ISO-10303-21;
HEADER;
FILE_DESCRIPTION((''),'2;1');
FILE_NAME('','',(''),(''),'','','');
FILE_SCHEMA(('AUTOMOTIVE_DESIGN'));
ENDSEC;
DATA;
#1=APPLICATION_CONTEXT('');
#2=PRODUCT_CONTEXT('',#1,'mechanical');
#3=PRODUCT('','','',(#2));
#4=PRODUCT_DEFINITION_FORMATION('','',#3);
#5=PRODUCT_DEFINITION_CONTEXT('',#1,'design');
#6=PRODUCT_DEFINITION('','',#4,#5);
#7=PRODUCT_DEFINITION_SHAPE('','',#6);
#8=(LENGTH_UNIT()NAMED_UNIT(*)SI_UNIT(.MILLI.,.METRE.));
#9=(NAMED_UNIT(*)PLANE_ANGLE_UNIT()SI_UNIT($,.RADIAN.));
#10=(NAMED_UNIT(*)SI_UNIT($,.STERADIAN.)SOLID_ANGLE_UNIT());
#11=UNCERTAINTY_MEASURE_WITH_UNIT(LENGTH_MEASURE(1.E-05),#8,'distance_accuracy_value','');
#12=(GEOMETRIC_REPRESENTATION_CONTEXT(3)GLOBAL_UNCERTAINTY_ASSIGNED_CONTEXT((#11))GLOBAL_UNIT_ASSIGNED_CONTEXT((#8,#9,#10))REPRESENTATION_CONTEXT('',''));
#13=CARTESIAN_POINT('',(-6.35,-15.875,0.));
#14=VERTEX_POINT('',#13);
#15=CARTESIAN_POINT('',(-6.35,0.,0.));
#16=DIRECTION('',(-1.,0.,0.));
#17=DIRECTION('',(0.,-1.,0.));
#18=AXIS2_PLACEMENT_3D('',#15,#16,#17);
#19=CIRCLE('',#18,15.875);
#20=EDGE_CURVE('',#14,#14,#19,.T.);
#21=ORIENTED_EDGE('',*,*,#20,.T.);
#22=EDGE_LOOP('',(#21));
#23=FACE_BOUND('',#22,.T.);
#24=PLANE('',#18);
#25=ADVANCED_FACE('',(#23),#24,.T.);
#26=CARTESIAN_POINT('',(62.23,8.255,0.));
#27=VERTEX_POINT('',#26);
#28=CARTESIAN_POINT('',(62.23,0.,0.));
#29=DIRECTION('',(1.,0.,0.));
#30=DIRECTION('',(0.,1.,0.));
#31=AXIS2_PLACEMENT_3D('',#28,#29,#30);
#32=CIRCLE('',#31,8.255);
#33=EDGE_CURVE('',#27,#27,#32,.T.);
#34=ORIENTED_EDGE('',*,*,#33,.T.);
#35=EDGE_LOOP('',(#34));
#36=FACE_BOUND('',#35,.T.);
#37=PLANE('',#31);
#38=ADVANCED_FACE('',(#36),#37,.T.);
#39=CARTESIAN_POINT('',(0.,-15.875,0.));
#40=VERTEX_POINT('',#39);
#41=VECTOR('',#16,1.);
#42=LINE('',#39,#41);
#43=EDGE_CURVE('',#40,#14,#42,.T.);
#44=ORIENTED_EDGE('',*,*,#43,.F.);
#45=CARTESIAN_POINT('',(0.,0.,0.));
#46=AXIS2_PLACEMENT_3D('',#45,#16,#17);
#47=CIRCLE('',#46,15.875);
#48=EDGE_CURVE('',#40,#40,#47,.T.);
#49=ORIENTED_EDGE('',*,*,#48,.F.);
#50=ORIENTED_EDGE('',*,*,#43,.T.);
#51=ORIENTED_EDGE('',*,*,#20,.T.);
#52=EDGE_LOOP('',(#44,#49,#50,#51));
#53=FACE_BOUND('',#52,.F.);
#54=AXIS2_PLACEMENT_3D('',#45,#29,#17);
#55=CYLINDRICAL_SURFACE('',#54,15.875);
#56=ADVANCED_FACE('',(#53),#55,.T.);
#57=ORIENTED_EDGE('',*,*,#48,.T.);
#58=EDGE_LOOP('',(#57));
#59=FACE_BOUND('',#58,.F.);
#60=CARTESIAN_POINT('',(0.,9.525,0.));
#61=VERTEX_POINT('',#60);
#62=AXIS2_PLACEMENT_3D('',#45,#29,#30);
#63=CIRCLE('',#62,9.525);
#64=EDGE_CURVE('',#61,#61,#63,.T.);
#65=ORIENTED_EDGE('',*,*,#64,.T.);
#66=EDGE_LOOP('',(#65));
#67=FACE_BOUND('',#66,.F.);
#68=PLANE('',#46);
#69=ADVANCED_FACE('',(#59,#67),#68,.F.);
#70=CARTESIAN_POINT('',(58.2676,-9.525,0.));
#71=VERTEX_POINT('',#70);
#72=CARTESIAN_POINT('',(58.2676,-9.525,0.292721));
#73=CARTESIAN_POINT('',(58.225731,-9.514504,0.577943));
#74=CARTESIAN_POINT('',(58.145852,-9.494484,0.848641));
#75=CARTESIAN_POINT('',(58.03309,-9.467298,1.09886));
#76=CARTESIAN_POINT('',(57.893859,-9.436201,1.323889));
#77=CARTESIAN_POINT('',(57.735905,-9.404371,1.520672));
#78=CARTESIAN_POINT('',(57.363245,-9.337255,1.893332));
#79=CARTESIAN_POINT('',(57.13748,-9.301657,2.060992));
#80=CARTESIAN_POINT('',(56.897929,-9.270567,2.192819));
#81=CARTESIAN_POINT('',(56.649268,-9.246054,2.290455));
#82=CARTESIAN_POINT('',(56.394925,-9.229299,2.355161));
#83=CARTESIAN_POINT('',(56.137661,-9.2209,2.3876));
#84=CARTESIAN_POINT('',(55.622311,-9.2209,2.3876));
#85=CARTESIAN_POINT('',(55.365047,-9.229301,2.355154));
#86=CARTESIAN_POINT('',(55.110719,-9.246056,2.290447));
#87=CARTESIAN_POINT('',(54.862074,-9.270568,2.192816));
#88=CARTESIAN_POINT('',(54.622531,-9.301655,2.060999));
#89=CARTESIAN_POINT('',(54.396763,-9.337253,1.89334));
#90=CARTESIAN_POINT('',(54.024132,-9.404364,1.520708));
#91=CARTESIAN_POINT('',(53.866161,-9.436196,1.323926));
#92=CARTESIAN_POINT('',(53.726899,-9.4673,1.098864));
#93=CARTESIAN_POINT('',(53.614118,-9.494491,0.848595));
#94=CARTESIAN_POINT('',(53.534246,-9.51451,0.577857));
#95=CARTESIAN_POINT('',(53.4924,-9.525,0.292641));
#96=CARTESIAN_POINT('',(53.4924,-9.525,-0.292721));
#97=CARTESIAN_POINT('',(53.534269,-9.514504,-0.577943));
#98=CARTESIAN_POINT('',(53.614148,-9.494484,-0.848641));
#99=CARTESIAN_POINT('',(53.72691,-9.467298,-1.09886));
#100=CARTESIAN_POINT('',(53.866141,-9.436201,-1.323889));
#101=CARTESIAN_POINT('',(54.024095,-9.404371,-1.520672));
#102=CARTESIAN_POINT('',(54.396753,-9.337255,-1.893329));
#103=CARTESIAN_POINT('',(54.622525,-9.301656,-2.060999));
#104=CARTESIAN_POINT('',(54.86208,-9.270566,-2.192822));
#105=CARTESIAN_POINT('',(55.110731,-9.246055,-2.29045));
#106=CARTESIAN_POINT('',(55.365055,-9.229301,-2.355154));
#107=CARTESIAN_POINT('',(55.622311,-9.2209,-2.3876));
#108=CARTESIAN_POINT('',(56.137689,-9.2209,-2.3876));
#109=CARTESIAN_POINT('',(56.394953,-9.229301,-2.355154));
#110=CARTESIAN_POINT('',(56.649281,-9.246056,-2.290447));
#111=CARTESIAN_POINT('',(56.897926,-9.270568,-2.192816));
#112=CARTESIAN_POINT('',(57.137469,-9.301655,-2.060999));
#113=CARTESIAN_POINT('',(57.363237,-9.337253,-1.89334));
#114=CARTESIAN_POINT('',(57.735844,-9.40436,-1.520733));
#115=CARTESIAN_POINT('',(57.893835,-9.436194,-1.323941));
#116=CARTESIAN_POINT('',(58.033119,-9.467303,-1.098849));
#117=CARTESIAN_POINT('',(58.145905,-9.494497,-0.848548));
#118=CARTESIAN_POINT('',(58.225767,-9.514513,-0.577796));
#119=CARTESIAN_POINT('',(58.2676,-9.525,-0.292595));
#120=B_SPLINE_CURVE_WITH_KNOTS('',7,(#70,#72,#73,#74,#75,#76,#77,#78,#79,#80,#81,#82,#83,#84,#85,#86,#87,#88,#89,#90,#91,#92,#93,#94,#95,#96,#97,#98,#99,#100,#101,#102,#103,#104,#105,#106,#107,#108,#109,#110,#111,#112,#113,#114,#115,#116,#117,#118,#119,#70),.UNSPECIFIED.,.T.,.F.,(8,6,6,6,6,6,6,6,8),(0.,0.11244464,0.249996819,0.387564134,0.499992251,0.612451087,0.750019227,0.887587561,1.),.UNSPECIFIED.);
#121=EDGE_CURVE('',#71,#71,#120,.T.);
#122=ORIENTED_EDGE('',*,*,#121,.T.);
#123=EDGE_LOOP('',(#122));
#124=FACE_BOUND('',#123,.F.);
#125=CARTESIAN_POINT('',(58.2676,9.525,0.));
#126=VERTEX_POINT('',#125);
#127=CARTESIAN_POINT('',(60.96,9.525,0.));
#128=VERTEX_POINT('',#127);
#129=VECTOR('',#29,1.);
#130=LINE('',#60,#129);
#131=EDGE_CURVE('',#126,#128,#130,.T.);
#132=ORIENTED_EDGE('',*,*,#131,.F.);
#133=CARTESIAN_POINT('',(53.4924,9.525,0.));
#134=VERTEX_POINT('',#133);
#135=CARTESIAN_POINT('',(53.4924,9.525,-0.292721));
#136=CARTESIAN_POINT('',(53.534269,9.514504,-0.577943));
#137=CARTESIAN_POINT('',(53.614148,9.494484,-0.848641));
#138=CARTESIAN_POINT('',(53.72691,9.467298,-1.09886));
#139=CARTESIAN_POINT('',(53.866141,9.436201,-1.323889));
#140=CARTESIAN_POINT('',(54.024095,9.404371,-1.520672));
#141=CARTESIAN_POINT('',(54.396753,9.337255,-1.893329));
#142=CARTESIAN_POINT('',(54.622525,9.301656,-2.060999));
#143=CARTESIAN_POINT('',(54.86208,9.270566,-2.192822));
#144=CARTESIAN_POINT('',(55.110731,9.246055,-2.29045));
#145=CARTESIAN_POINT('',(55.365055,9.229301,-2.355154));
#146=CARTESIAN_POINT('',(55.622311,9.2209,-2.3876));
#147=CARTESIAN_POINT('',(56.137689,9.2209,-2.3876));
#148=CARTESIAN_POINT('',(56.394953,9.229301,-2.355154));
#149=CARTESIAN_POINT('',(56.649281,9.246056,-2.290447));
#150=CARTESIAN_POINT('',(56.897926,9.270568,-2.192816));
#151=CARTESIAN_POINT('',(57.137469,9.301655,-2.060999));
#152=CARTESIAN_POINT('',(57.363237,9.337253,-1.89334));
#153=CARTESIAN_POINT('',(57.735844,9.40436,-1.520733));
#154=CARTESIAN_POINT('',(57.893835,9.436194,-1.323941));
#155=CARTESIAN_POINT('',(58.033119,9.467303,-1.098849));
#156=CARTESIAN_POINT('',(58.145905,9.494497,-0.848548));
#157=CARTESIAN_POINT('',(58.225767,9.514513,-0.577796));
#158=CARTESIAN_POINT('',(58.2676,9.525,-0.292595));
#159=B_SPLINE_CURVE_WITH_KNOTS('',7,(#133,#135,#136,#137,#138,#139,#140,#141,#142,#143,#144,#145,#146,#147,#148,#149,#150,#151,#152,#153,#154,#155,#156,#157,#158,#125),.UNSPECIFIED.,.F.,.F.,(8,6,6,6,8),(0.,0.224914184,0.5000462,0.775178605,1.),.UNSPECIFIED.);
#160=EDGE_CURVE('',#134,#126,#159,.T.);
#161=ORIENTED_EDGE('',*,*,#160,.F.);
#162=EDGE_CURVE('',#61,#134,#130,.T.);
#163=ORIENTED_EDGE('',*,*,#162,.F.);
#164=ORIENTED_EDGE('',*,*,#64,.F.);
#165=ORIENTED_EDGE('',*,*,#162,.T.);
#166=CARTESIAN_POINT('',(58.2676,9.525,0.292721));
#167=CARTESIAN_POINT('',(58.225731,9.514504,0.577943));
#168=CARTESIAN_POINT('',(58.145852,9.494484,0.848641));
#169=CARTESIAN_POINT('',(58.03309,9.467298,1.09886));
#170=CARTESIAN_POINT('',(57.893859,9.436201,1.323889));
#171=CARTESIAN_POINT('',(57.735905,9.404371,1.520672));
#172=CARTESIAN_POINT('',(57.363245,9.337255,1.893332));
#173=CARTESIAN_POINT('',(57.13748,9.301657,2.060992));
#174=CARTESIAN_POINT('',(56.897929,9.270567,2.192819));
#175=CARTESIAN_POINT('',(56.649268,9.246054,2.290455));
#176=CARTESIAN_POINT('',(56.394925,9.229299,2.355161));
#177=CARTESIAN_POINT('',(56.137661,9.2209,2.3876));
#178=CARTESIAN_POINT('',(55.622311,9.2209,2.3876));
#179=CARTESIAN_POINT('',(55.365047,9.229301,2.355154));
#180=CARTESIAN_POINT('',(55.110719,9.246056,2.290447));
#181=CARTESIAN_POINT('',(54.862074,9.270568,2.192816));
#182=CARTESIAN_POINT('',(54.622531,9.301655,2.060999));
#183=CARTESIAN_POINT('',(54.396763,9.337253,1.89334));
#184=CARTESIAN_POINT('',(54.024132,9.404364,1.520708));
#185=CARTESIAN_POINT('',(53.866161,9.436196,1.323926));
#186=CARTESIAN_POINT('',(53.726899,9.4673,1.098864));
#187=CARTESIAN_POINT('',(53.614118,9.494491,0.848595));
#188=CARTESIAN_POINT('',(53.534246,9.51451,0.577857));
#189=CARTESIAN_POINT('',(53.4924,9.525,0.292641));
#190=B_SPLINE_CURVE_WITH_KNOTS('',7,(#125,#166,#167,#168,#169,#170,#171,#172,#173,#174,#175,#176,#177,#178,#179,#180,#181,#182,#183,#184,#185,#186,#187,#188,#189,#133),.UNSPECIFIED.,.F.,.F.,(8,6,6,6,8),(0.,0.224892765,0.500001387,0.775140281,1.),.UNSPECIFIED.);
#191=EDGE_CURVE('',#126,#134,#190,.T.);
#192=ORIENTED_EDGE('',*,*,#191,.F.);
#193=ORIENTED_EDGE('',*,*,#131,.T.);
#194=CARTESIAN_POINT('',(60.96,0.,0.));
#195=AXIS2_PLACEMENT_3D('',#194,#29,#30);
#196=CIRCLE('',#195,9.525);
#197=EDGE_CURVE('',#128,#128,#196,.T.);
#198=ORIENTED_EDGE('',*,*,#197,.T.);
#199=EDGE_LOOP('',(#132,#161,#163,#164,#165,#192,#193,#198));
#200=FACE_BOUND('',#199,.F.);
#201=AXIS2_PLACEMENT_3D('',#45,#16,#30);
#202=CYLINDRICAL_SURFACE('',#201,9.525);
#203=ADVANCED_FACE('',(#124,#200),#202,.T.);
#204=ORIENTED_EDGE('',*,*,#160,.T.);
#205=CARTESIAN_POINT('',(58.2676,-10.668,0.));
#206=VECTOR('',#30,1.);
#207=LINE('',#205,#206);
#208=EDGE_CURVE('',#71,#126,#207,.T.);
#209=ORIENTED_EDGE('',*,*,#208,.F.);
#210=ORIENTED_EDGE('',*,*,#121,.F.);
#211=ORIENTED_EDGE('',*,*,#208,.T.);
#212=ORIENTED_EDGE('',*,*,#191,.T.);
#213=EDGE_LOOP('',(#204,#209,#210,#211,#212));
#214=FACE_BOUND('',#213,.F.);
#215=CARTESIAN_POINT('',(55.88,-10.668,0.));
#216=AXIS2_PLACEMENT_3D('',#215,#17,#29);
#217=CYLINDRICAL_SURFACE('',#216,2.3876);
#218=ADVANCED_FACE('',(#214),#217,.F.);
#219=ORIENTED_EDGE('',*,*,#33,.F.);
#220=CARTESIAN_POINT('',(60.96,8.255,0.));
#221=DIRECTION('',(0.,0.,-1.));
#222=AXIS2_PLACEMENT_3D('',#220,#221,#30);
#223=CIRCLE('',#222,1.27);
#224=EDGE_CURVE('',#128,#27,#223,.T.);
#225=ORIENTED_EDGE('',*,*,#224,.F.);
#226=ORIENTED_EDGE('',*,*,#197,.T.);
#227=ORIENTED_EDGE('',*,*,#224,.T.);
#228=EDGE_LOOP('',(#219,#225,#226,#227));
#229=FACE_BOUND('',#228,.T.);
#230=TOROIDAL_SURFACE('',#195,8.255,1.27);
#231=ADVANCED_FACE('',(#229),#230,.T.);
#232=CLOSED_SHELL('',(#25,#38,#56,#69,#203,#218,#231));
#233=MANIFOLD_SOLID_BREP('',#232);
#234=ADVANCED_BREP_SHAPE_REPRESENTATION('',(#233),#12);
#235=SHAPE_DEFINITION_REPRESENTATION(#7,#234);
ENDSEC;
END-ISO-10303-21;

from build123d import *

# Parameters (mm, degrees)
F0_R     = 9.525
F1_DEPTH = 62.23
F3_R     = 2.3876
F4_DEPTH = 20.194
F5_R     = 15.875
F5_R_2   = 9.525
F6_DEPTH = 6.35
F7_R     = 1.27


with BuildPart() as f1:
    # F0 (on Right) → F1 (new body)
    with BuildSketch(Plane.YZ):
        Circle(F0_R)
    extrude(amount=F1_DEPTH)

    # F3 (on offset) → F4 (cut, through all)
    with BuildSketch(Plane.XZ.offset(10.668)):
        with Locations((55.88, 0)):
            Circle(F3_R)
    extrude(amount=-F4_DEPTH, mode=Mode.SUBTRACT)

    # F5 (on face) → F6 (join)
    with BuildSketch(Plane(origin=(0, 0, 0), x_dir=(0, -1, 0), z_dir=(-1, 0, 0))):
        Circle(F5_R)
        Circle(F5_R_2, mode=Mode.SUBTRACT)
        Circle(F5_R_2)
    extrude(amount=F6_DEPTH)

    # F7
    f7_edges = [f1.edges().sort_by_distance(p)[0] for p in [
        (62.23, -9.525, 0),
    ]]
    fillet(f7_edges, radius=F7_R)


solid = f1.part
